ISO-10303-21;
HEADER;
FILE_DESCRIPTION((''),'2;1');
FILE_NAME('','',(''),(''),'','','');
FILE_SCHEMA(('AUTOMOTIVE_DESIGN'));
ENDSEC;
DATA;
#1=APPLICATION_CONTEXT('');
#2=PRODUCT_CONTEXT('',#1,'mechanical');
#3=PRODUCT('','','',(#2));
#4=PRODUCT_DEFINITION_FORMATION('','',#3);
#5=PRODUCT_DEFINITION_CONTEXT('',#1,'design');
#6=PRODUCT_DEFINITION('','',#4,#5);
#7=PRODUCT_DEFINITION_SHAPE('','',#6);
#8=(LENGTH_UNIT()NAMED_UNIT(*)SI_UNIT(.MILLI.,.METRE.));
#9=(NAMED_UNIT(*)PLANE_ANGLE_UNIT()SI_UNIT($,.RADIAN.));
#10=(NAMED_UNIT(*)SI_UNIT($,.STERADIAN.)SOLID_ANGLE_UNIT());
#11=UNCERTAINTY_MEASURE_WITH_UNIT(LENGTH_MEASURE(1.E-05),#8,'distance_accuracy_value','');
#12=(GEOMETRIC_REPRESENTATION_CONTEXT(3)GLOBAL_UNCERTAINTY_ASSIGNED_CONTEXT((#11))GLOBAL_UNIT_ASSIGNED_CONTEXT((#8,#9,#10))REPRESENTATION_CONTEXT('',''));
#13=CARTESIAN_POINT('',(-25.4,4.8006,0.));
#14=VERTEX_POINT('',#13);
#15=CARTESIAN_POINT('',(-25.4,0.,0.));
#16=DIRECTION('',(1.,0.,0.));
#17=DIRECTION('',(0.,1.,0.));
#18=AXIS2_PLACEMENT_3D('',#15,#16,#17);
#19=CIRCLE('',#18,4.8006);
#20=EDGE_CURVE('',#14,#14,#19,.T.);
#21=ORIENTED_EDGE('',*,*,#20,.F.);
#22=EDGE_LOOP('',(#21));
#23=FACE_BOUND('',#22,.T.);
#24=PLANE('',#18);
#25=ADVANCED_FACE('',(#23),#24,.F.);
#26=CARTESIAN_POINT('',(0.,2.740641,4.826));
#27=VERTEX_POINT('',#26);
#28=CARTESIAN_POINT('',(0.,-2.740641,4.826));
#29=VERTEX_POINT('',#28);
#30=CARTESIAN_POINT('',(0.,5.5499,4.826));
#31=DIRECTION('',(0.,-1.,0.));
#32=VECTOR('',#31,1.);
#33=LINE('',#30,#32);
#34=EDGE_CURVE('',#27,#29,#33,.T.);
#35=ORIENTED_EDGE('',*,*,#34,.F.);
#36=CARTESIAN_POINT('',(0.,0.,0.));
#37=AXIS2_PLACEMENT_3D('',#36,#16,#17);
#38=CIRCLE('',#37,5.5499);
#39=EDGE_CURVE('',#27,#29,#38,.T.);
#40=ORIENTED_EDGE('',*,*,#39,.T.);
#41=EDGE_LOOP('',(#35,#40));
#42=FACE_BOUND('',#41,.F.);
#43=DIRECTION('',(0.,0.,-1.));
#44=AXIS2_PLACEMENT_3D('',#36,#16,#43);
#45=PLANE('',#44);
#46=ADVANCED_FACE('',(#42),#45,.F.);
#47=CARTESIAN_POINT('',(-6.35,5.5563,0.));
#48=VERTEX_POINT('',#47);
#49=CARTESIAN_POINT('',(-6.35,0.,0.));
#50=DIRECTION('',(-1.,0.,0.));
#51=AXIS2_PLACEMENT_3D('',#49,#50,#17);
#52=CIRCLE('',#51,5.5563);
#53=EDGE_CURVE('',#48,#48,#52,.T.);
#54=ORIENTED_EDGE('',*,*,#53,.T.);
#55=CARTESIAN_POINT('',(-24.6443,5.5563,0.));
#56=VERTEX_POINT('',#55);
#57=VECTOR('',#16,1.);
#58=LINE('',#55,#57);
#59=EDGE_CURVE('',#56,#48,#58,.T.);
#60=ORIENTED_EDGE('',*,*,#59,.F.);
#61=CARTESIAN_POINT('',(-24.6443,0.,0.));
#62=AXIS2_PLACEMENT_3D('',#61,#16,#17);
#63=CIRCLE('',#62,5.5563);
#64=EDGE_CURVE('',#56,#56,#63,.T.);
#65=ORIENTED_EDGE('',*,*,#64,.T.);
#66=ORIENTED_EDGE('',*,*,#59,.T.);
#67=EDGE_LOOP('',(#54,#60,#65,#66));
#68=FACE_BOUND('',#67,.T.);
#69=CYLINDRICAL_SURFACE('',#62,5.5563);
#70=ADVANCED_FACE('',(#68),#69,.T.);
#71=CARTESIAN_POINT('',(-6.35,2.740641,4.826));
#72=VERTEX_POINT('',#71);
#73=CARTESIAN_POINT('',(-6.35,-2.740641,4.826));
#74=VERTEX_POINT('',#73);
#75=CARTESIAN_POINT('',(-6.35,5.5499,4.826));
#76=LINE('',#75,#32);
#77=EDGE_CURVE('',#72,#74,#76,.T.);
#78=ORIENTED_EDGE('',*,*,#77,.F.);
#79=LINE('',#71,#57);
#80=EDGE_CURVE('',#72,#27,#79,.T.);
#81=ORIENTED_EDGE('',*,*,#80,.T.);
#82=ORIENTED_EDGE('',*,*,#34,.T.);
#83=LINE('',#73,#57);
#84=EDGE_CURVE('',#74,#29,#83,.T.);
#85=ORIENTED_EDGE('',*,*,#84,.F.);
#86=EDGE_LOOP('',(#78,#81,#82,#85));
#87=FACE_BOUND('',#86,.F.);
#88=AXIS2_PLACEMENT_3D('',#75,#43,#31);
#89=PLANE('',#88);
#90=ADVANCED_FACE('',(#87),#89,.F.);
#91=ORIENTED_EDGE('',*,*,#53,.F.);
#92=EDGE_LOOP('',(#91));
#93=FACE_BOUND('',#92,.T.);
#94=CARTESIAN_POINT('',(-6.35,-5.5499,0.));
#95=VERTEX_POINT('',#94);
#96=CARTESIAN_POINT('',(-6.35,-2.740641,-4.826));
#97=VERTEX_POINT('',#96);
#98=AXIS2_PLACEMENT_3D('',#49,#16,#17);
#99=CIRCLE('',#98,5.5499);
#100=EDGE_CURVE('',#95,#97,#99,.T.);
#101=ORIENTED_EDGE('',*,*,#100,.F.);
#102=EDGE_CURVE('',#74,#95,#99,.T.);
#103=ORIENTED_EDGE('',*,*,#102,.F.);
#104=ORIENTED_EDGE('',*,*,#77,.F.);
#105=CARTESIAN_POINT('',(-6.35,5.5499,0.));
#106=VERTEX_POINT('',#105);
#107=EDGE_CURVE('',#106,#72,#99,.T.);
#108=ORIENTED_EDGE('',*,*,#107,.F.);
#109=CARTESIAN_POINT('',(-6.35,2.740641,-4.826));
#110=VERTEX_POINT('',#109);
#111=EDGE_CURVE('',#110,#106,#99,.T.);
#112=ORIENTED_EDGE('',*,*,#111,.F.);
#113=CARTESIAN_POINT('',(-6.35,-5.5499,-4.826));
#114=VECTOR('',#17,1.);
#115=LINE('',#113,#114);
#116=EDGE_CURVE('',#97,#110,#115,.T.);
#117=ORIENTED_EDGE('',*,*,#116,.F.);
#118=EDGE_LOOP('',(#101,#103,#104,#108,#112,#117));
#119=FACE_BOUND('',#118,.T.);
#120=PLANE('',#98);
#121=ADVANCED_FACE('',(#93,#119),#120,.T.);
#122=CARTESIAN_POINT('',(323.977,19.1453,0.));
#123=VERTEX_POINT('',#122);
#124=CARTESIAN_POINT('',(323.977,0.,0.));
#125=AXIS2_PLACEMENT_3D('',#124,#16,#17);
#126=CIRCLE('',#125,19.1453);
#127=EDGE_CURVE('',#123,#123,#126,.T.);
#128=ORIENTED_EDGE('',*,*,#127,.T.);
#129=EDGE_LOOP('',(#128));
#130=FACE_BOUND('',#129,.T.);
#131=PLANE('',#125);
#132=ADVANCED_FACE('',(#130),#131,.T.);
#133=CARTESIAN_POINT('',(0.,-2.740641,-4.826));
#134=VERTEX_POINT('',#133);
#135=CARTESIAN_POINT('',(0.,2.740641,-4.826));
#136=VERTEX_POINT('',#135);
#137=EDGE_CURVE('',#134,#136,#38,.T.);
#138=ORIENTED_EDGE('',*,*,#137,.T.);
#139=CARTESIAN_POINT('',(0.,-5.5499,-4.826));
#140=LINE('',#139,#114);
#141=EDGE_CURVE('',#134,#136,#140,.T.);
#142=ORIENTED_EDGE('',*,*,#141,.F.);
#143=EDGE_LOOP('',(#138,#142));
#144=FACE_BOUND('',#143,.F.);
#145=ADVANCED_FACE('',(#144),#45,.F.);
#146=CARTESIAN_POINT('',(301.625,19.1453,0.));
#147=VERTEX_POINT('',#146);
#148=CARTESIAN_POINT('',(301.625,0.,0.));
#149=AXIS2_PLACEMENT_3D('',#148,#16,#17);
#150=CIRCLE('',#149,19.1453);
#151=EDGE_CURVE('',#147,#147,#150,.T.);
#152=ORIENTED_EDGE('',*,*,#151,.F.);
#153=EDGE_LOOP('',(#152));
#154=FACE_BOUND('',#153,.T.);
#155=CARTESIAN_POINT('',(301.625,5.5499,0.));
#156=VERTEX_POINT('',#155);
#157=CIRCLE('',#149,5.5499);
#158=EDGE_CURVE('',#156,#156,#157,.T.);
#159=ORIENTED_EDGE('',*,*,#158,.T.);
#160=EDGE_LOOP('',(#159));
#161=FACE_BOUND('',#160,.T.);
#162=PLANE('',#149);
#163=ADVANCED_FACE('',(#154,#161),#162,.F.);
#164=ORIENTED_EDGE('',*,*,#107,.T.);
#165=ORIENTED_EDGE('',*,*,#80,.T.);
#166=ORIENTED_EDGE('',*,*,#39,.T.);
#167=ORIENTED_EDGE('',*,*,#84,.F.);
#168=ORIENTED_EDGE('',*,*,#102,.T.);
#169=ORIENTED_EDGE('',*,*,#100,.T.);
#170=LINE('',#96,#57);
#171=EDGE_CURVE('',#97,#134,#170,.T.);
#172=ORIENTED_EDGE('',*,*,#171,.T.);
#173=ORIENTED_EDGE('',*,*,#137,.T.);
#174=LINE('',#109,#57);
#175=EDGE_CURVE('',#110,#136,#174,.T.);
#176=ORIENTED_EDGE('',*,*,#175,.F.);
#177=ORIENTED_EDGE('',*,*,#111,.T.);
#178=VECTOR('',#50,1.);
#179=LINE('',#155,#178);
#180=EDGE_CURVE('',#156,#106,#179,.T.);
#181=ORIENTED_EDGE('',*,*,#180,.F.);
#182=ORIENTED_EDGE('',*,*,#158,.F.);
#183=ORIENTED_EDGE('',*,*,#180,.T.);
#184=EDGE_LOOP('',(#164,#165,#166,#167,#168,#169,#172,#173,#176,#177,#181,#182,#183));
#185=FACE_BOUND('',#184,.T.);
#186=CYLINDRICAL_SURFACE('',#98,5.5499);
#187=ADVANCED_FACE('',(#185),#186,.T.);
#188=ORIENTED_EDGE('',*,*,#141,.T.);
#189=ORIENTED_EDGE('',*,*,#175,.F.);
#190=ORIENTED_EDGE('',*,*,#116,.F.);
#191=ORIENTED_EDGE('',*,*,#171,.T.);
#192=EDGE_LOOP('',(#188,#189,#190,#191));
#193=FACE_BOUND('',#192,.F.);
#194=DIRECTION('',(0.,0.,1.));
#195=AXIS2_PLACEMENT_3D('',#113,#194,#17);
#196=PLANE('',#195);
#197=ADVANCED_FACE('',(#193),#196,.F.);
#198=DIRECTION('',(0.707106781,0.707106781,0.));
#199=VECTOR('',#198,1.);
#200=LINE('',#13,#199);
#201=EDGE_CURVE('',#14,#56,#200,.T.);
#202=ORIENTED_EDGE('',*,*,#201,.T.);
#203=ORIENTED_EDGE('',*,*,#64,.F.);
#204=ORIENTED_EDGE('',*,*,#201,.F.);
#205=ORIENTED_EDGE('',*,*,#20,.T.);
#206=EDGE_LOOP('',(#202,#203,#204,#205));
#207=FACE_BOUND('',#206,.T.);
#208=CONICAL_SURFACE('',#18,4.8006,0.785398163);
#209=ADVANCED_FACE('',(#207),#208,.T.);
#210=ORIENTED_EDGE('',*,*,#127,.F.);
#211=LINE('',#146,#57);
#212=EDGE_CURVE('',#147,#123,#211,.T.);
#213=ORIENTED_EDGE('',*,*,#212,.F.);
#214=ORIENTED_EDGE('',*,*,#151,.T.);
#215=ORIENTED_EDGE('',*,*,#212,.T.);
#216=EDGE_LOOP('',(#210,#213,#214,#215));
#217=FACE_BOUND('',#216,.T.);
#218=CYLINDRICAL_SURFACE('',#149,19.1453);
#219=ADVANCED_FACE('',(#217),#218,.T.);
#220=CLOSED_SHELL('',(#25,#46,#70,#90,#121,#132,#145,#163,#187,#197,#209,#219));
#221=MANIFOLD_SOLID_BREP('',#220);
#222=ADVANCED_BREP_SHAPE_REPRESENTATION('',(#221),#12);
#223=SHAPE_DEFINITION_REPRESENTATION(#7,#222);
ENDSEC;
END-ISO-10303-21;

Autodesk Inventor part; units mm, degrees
sketch "Sketch_1" plane through (0, 0, 0) normal (0, 0, 1) x (1, 0, 0)
  line L0 (323.977, 0) -> (-6.35, 0)
  line L1 (-6.35, 0) -> (-6.35, 5.5499)
  line L2 (-6.35, 5.5499) -> (301.625, 5.5499)
  line L3 (301.625, 5.5499) -> (301.625, 19.1453)
  line L4 (301.625, 19.1453) -> (323.977, 19.1453)
  line L5 (323.977, 19.1453) -> (323.977, 0)
  line L6 (323.977, 0) -> (-6.35, 0)
revolve "Revolution1" add sketch "Sketch_1" angle 360 about axis through (323.977, 0, 0) along (1, 0, 0)
sketch "Sketch_3" plane through (0, 0, 0) normal (0, 0, 1) x (1, 0, 0)
  line L0 (-6.35, 0) -> (-25.4, 0)
  line L1 (-25.4, 0) -> (-25.4, 4.8006)
  line L2 (-25.4, 4.8006) -> (-24.6443, 5.5563)
  line L3 (-24.6443, 5.5563) -> (-6.35, 5.5563)
  line L4 (-6.35, 5.5563) -> (-6.35, 0)
  line L5 (-6.35, 0) -> (-25.4, 0)
revolve "Revolution2" add sketch "Sketch_3" angle 360 about axis through (-6.35, 0, 0) along (1, 0, 0)
thread "Thread1" size "7/16-20 UNF" class "2A" standard "ANSI Unified Screw Threads" full length
sketch "Sketch_10" plane through (-6.35, 0, 0) normal (1, 0, 0) x (0, 0, -1)
  line L0 (-11.0998, -11.0998) -> (11.0998, -11.0998)
  line L1 (11.0998, -11.0998) -> (11.0998, 11.0998)
  line L2 (11.0998, 11.0998) -> (-11.0998, 11.0998)
  line L3 (-11.0998, 11.0998) -> (-11.0998, -11.0998)
  line L4 (-4.826, -5.5499) -> (4.826, -5.5499)
  line L5 (4.826, -5.5499) -> (4.826, 5.5499)
  line L6 (4.826, 5.5499) -> (-4.826, 5.5499)
  line L7 (-4.826, 5.5499) -> (-4.826, -5.5499)
extrude "Extrusion1" cut sketch "Sketch_10" along normal blind 6.35
ref_plane "dia1_XY" through (-6.35, 5.5499, 0) normal (1, 0, 0) x (0, 0, -1)
ref_plane "dia1_YZ" through (-6.35, 5.5499, 0) normal (0, 0, -1) x (0, 1, 0)
ref_plane "dia1_ZX" through (-6.35, 5.5499, 0) normal (0, 1, 0) x (1, 0, 0)
ref_plane "dia12_XY" through (0, 0, 19.7675) normal (1, 0, 0) x (0, 0, -1)
ref_plane "dia12_YZ" through (0, 0, 19.7675) normal (0, 0, -1) x (0, 1, 0)
ref_plane "dia12_ZX" through (0, 0, 19.7675) normal (0, 1, 0) x (1, 0, 0)
ref_plane "dia2_XY" through (-6.35, -5.5499, 0) normal (1, 0, 0) x (0, 0, -1)
ref_plane "dia2_YZ" through (-6.35, -5.5499, 0) normal (0, 0, -1) x (0, 1, 0)
ref_plane "dia2_ZX" through (-6.35, -5.5499, 0) normal (0, 1, 0) x (1, 0, 0)
ref_plane "dia22_XY" through (0, 0, -19.7675) normal (1, 0, 0) x (0, 0, -1)
ref_plane "dia22_YZ" through (0, 0, -19.7675) normal (0, 0, -1) x (0, 1, 0)
ref_plane "dia22_ZX" through (0, 0, -19.7675) normal (0, 1, 0) x (1, 0, 0)
ref_plane "rl1_XY" through (-25.4, 0, 0) normal (1, 0, 0) x (0, 0, -1)
ref_plane "rl1_YZ" through (-25.4, 0, 0) normal (0, 0, -1) x (0, 1, 0)
ref_plane "rl1_ZX" through (-25.4, 0, 0) normal (0, 1, 0) x (1, 0, 0)
ref_plane "rl2_XY" through (-6.35, 0, 0) normal (1, 0, 0) x (0, 0, -1)
ref_plane "rl2_YZ" through (-6.35, 0, 0) normal (0, 0, -1) x (0, 1, 0)
ref_plane "rl2_ZX" through (-6.35, 0, 0) normal (0, 1, 0) x (1, 0, 0)
ref_plane "rod_cp_XY" through (0, 0, 0) normal (1, 0, 0) x (0, 0, -1)
ref_plane "rod_cp_YZ" through (0, 0, 0) normal (0, 0, -1) x (0, 1, 0)
ref_plane "rod_cp_ZX" through (0, 0, 0) normal (0, 1, 0) x (1, 0, 0)
ref_plane "thd1_XY" through (-25.4, 5.5563, 0) normal (1, 0, 0) x (0, 0, -1)
ref_plane "thd1_YZ" through (-25.4, 5.5563, 0) normal (0, 0, -1) x (0, 1, 0)
ref_plane "thd1_ZX" through (-25.4, 5.5563, 0) normal (0, 1, 0) x (1, 0, 0)
ref_plane "thd2_XY" through (-25.4, -5.5563, 0) normal (1, 0, 0) x (0, 0, -1)
ref_plane "thd2_YZ" through (-25.4, -5.5563, 0) normal (0, 0, -1) x (0, 1, 0)
ref_plane "thd2_ZX" through (-25.4, -5.5563, 0) normal (0, 1, 0) x (1, 0, 0)
ref_plane "to_rod_clevis_XY" through (-30.988, 0, 0) normal (1, 0, 0) x (0, 0, -1)
ref_plane "to_rod_clevis_YZ" through (-30.988, 0, 0) normal (0, 0, -1) x (0, 1, 0)
ref_plane "to_rod_clevis_ZX" through (-30.988, 0, 0) normal (0, 1, 0) x (1, 0, 0)
ref_plane "wf1_XY" through (-6.35, 0, 0) normal (1, 0, 0) x (0, 0, -1)
ref_plane "wf1_YZ" through (-6.35, 0, 0) normal (0, 0, -1) x (0, 1, 0)
ref_plane "wf1_ZX" through (-6.35, 0, 0) normal (0, 1, 0) x (1, 0, 0)
ref_plane "wf2_XY" through (0, 0, 0) normal (1, 0, 0) x (0, 0, -1)
ref_plane "wf2_YZ" through (0, 0, 0) normal (0, 0, -1) x (0, 1, 0)
ref_plane "wf2_ZX" through (0, 0, 0) normal (0, 1, 0) x (1, 0, 0)
ref_plane "wfw1_XY" through (-6.35, 0, -4.826) normal (0, 1, 0) x (1, 0, 0)
ref_plane "wfw1_YZ" through (-6.35, 0, -4.826) normal (1, 0, 0) x (0, 0, -1)
ref_plane "wfw1_ZX" through (-6.35, 0, -4.826) normal (0, 0, -1) x (0, 1, 0)
ref_plane "wfw2_XY" through (-6.35, 0, 4.826) normal (0, 1, 0) x (1, 0, 0)
ref_plane "wfw2_YZ" through (-6.35, 0, 4.826) normal (1, 0, 0) x (0, 0, -1)
ref_plane "wfw2_ZX" through (-6.35, 0, 4.826) normal (0, 0, -1) x (0, 1, 0)
properties part number "C-175-DPEE50_rod" material "Steel, Galvanized"
